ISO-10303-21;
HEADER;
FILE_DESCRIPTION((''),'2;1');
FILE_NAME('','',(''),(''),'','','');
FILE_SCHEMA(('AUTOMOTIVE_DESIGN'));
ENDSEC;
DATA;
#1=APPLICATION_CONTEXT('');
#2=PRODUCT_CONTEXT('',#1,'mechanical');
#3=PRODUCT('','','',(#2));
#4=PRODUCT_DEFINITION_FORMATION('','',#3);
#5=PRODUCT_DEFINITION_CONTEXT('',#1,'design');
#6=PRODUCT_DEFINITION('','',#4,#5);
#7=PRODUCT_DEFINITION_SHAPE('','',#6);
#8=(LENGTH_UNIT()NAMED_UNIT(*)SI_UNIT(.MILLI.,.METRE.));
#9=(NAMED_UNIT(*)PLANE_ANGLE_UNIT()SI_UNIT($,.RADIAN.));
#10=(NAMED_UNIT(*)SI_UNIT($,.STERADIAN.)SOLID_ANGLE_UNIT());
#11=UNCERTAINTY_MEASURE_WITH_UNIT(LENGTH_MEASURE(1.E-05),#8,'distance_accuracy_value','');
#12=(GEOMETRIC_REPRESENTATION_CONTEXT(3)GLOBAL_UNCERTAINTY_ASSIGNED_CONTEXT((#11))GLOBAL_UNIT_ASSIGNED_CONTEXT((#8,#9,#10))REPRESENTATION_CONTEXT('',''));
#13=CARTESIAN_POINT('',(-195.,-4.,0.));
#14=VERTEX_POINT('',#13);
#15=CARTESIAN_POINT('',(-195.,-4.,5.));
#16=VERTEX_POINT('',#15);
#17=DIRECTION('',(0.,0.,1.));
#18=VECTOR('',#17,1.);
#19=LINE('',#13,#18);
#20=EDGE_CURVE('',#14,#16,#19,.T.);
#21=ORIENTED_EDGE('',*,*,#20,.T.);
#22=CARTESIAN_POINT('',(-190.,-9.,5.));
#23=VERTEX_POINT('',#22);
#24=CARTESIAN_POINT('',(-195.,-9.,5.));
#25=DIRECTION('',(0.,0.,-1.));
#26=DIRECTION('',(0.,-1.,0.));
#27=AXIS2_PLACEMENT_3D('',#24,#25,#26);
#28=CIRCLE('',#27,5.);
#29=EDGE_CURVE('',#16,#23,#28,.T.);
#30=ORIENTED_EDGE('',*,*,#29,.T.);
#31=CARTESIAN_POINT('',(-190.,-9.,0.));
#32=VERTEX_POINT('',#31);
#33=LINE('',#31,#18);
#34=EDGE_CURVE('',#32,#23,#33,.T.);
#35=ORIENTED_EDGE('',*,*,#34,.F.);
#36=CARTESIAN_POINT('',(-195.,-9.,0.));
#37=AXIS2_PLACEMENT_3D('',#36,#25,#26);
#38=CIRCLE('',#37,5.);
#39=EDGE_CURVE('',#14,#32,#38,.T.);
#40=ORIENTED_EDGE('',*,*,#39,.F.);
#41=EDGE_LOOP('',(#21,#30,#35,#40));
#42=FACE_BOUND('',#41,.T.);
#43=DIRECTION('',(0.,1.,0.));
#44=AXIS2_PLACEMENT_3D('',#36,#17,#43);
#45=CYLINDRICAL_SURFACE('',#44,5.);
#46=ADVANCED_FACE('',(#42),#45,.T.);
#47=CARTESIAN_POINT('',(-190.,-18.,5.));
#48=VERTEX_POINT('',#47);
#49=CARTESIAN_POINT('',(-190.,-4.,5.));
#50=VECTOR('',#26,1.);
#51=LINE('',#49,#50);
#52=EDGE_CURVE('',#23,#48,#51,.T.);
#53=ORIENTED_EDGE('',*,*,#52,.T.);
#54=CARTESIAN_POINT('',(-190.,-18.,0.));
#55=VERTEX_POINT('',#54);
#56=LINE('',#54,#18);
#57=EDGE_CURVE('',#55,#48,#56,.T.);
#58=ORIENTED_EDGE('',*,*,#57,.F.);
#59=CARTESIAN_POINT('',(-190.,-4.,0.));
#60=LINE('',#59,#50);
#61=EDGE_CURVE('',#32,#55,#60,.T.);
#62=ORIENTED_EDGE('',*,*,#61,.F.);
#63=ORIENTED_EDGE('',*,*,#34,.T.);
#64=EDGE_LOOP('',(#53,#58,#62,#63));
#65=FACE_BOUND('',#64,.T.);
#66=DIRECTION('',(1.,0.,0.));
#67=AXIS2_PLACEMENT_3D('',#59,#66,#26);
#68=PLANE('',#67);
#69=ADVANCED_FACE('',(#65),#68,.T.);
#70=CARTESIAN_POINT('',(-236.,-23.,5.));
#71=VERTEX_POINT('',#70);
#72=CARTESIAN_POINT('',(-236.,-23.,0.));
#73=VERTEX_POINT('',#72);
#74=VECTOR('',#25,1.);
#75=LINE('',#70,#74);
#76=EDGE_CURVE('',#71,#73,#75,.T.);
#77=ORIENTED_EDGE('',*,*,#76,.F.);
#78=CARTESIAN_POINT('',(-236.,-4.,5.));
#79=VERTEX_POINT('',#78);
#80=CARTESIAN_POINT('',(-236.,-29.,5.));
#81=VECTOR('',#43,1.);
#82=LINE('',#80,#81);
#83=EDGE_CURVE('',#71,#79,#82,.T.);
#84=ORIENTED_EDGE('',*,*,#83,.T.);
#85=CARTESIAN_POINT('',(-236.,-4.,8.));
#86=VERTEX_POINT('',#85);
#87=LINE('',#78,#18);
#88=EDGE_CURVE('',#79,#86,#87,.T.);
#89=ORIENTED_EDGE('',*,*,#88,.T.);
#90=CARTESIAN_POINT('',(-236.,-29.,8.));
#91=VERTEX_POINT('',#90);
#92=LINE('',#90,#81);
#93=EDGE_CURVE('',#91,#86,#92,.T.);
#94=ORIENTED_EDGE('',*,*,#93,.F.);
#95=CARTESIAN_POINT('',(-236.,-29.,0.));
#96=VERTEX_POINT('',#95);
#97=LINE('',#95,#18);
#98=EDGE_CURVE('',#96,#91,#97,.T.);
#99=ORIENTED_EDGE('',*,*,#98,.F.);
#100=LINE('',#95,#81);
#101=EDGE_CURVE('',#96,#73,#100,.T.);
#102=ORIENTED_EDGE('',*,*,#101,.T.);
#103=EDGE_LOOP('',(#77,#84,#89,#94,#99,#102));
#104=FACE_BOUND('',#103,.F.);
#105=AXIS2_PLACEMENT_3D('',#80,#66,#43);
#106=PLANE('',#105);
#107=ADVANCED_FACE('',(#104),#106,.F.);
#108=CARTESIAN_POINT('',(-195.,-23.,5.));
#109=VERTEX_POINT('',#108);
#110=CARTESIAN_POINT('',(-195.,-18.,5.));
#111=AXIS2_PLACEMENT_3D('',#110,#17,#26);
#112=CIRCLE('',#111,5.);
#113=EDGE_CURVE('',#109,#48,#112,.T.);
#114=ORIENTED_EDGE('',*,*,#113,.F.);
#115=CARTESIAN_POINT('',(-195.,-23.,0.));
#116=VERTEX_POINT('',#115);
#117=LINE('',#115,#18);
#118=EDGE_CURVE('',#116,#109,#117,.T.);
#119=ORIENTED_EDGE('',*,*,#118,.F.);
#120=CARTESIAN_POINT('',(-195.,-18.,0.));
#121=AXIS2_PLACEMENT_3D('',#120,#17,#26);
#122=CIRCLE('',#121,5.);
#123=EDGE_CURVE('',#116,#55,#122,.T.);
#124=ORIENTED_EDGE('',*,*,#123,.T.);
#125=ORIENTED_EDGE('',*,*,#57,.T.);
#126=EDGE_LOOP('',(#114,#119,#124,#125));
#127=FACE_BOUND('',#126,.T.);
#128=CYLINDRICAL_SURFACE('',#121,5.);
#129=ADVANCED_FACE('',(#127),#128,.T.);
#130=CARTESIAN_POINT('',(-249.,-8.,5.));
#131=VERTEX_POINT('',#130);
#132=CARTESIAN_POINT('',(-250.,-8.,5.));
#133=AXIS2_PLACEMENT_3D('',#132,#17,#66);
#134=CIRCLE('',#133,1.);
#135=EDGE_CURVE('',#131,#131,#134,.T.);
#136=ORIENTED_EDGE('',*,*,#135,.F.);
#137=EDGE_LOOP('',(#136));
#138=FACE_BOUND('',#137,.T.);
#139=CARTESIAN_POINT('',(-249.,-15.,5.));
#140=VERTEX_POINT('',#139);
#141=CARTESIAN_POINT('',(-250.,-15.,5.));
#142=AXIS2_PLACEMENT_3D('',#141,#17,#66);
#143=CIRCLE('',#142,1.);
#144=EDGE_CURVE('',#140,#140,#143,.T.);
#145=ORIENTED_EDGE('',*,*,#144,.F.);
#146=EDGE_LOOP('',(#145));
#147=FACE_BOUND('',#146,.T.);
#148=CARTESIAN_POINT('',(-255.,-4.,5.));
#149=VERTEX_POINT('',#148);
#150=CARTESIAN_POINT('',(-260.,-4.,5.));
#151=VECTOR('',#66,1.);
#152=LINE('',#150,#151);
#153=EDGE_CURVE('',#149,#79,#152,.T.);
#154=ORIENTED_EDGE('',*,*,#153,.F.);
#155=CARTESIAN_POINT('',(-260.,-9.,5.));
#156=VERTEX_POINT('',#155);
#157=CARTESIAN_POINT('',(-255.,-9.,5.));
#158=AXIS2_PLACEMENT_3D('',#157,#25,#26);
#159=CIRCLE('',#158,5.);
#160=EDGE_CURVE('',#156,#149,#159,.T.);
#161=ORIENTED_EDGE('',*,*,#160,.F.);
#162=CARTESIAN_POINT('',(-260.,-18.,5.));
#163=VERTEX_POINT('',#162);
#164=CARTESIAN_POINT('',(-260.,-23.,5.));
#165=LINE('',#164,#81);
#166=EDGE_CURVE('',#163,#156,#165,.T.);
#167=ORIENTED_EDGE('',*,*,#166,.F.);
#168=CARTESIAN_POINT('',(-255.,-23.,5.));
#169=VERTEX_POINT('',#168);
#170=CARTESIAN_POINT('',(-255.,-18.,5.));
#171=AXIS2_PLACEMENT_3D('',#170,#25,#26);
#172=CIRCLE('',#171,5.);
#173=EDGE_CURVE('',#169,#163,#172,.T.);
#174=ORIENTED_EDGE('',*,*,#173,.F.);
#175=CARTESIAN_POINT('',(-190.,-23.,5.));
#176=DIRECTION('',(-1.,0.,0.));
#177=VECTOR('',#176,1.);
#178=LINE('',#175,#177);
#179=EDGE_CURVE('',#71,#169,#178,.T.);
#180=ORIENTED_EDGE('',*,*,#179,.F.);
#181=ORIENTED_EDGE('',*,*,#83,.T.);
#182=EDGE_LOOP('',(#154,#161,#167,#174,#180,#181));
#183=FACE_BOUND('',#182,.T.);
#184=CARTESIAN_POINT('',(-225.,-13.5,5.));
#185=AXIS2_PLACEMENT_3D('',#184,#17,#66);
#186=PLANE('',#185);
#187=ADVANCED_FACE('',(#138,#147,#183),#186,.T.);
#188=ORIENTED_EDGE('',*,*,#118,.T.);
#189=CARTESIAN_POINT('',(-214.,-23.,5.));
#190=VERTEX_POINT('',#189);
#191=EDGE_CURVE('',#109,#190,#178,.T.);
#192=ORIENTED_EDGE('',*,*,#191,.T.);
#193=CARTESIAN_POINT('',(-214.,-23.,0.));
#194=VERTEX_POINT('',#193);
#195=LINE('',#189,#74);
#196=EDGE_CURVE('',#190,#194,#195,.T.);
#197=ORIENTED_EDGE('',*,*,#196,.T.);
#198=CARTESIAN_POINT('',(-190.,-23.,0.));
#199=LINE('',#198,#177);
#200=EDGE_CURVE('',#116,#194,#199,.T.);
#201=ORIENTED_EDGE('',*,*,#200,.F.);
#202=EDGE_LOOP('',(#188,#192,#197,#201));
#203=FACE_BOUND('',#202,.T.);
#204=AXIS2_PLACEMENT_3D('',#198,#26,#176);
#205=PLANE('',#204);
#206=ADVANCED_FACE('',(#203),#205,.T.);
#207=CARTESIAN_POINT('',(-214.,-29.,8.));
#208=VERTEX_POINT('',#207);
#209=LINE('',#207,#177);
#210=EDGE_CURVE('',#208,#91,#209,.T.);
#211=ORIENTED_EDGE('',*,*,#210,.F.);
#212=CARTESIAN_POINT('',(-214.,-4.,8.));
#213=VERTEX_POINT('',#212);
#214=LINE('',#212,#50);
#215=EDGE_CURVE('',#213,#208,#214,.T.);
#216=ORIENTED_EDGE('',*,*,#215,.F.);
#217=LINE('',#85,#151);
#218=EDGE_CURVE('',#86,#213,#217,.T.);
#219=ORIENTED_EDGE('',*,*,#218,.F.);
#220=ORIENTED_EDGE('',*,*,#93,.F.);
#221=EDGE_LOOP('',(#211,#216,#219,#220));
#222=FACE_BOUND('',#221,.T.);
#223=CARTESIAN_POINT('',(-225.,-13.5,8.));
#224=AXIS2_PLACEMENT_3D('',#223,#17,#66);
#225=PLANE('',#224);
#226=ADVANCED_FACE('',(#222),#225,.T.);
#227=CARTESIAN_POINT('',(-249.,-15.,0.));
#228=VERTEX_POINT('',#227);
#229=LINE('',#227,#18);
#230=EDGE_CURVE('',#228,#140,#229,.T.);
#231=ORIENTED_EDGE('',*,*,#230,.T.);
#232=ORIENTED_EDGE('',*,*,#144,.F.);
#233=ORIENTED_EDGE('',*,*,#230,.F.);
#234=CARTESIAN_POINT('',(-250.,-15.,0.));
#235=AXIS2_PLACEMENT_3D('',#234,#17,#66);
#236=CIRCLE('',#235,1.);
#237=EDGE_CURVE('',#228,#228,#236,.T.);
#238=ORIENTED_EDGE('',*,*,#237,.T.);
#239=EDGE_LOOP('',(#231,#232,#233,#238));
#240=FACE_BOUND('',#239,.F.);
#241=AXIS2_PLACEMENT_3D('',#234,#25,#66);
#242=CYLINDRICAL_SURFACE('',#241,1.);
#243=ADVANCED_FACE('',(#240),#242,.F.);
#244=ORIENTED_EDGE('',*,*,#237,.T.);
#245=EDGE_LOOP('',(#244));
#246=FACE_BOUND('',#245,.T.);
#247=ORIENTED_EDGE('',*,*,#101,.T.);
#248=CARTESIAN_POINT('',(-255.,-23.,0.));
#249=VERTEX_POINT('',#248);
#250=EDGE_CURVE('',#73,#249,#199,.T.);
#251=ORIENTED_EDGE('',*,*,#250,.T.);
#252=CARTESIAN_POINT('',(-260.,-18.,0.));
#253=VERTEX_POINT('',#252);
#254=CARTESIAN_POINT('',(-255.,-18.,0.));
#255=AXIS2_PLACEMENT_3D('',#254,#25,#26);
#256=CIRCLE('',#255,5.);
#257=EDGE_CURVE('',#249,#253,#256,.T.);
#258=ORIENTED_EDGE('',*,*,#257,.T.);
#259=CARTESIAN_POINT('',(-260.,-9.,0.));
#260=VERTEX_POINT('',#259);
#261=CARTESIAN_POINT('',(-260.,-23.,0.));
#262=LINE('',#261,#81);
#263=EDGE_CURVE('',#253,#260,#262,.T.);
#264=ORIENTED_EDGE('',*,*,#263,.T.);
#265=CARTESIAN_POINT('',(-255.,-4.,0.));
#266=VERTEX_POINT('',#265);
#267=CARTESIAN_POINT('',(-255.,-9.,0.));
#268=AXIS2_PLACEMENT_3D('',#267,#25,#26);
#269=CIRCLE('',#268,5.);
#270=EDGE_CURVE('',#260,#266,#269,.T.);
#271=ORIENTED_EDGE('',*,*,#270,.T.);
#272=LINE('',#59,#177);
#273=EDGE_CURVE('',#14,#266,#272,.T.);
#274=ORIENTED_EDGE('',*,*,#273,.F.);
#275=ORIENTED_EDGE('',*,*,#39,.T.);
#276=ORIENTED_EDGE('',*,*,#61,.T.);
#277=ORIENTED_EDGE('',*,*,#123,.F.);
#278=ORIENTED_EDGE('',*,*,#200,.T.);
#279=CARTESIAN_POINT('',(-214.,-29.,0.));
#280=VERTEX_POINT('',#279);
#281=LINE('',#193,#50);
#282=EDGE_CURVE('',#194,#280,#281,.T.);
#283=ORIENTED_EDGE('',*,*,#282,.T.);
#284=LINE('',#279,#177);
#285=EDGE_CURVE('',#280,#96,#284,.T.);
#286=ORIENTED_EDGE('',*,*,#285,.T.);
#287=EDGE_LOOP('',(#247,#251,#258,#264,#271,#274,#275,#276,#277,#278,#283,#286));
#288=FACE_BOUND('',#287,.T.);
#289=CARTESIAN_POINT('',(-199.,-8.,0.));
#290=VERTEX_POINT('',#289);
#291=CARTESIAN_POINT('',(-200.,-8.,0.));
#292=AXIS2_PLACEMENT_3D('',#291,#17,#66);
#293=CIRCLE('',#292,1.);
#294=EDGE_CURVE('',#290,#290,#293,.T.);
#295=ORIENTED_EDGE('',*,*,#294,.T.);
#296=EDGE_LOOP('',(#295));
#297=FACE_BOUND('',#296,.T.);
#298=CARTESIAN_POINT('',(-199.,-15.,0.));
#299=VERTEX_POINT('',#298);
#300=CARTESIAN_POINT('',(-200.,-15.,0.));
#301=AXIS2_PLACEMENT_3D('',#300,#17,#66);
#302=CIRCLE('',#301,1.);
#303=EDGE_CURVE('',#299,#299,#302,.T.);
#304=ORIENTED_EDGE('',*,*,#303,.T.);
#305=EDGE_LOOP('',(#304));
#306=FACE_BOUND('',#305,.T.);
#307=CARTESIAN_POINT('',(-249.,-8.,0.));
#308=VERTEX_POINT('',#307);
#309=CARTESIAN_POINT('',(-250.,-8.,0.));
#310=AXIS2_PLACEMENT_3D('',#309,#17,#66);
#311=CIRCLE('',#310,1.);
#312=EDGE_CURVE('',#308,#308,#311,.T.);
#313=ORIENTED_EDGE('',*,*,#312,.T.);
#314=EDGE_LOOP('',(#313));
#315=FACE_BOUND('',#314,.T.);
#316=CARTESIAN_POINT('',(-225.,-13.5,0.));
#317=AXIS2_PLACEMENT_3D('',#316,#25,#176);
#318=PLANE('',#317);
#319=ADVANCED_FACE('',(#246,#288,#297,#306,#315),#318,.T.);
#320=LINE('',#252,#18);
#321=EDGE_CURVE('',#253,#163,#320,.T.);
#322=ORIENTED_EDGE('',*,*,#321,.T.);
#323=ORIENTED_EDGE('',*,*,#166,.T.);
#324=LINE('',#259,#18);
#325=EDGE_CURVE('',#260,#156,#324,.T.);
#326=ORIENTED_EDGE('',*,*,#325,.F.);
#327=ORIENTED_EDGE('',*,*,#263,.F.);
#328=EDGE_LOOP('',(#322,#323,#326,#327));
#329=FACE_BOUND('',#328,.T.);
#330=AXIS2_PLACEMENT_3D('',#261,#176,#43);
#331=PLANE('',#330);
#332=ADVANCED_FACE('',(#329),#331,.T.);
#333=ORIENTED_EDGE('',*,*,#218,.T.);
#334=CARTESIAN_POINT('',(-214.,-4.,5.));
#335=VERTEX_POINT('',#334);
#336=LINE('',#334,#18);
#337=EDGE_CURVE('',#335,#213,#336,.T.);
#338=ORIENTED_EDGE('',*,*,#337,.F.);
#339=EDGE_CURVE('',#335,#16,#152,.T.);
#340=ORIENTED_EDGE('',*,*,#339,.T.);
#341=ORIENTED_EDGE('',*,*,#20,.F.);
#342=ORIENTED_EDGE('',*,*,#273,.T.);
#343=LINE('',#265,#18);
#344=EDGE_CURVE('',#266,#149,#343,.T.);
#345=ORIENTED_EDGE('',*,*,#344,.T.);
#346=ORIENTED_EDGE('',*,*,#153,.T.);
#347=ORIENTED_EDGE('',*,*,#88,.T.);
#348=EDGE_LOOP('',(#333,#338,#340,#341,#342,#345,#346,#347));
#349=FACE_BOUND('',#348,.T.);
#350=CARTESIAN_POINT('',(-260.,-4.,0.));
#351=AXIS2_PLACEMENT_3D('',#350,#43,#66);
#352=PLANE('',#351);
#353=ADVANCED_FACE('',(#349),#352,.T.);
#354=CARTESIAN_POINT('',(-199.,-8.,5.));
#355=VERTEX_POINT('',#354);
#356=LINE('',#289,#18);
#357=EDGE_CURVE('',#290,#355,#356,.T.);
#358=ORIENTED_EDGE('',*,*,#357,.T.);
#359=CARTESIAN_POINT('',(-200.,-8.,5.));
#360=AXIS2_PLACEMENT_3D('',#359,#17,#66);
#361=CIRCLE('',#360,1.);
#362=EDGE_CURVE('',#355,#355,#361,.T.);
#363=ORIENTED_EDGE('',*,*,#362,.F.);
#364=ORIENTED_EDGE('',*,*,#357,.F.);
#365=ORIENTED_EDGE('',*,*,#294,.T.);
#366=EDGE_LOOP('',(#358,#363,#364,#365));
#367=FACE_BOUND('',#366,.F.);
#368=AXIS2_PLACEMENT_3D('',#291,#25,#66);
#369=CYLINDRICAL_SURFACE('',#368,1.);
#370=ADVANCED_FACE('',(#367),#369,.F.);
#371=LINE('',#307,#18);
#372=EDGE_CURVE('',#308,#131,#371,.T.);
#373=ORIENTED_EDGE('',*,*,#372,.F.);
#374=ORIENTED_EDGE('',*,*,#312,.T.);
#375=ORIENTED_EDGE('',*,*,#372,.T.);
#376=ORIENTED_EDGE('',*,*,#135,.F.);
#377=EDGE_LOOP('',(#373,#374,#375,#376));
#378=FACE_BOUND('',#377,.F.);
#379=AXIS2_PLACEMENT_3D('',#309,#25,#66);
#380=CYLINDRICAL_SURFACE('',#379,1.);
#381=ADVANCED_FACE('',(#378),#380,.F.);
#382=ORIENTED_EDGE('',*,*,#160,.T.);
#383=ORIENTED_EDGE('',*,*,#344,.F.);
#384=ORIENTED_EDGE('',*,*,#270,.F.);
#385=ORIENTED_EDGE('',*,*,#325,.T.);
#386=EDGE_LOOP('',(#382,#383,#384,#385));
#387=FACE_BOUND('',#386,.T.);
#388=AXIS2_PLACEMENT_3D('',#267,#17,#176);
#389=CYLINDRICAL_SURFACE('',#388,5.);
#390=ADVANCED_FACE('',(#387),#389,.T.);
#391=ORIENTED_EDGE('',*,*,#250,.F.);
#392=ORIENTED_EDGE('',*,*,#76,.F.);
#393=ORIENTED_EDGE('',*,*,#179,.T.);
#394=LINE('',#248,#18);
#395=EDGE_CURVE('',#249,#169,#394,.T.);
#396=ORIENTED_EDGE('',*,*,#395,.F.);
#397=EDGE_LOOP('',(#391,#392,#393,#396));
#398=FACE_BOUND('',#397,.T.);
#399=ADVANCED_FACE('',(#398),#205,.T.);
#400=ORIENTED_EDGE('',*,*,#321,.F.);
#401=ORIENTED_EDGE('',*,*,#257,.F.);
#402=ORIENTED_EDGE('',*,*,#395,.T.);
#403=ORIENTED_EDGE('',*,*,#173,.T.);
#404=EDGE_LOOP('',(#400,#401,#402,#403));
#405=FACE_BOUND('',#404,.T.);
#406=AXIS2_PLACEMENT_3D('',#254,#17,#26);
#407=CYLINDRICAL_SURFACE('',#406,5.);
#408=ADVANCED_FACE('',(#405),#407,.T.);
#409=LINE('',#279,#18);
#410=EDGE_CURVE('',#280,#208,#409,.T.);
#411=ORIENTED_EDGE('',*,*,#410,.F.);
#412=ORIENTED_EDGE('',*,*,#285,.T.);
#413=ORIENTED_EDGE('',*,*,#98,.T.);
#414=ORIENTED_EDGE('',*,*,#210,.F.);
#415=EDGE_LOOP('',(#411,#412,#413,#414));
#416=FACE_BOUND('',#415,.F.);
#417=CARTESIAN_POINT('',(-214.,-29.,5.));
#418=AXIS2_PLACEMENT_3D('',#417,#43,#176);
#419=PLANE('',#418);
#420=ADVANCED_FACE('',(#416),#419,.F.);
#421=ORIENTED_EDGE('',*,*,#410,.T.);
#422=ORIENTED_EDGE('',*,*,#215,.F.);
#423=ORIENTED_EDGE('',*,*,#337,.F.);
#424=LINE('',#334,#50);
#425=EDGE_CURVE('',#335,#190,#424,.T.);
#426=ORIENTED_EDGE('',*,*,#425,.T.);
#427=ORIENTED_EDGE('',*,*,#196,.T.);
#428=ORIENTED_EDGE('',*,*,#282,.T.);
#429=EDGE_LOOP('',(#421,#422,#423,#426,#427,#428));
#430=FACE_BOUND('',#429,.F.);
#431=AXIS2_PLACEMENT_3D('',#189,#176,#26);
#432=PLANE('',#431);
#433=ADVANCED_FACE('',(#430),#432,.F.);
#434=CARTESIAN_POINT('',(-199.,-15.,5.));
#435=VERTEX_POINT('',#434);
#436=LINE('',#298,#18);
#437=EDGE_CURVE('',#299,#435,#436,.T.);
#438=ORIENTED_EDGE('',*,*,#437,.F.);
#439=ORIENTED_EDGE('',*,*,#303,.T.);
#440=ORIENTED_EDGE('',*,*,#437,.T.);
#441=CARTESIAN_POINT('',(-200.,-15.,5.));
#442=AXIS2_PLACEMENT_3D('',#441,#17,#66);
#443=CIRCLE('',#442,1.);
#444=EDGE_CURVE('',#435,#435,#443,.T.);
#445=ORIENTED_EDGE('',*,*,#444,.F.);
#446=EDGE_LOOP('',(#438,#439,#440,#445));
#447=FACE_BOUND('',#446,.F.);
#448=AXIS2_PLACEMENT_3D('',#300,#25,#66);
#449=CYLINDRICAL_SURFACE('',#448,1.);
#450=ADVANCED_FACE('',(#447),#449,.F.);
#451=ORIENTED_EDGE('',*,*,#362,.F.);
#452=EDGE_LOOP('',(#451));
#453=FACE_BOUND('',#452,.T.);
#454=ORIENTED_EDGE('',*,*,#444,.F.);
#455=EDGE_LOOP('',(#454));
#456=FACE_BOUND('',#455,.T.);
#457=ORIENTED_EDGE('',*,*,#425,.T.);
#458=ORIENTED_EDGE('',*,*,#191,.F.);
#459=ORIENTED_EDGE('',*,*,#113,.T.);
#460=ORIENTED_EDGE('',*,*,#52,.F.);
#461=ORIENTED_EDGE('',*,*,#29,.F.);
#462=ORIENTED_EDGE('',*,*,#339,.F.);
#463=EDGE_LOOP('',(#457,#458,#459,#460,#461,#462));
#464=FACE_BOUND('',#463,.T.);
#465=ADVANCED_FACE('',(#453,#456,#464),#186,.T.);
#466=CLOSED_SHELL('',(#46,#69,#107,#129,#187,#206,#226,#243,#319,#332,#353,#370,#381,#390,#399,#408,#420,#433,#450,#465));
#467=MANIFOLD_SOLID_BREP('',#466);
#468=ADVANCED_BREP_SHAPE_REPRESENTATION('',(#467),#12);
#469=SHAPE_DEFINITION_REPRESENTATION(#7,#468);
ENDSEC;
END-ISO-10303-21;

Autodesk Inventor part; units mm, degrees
ref_plane "YZ Plane" through (0, 0, 0) normal (1, 0, 0) x (0, 1, 0)
ref_plane "XZ Plane" through (0, 0, 0) normal (0, 1, 0) x (-1, 0, 0)
ref_plane "XY Plane" through (0, 0, 0) normal (0, 0, 1) x (1, 0, 0)
sketch "Sketch1" plane through (0, 0, 0) normal (0, 0, 1) x (1, 0, 0)
  line L0 (-350, 95) -> (350, 95)
  line L1 (350, 95) -> (350, -95)
  line L2 (350, -95) -> (-350, -95)
  line L3 (-350, -95) -> (-350, 95)
  circle A0 centre (-250, 55) radius 10
  circle A1 centre (-250, -15) radius 10
  circle A2 centre (250, 55) radius 10
  circle A3 centre (250, -15) radius 10
  line L4 (-110, 95) -> (110, 95)
  point P0 (0, 0)
  point P1 (0, 95)
  point P2 (350, 0)
  point P3 (0, -155)
  dimension "d0" = 700
  dimension "d1" = 190
  dimension "d2" = 20
  dimension "d3" = 70
  dimension "d4" = 40
  dimension "d7" = 20
  dimension "d8" = 70
  dimension "d9" = 500
  dimension "d10" = 100
extrude "Extrusion1" add sketch "Sketch1" along normal blind 50
sketch "Sketch2" plane through (0, 0, 50) normal (0, 0, 1) x (1, 0, 0)
  line L0 (-110, 95) -> (110, 95)
  line L1 (110, 95) -> (110, -155)
  line L2 (110, -155) -> (-110, -155)
  line L3 (-110, -155) -> (-110, 95)
  line L4 (350, 95) -> (-350, 95) projected
  point P0 (0, 0)
  point P1 (0, -155)
  dimension "d15" = 220
  dimension "d16" = 250
extrude "Extrusion2" add sketch "Sketch2" along normal blind 30
sketch "Sketch3" plane through (0, 0, 50) normal (0, 0, -1) x (-1, 0, 0)
  line L0 (110, -95) -> (-110, -95) projected
  line L1 (-110, -95) -> (-110, -155) projected
  line L2 (-110, -155) -> (110, -155) projected
  line L3 (110, -155) -> (110, -95) projected
  point P0 (0, 0)
extrude "Extrusion3" add sketch "Sketch3" along normal blind 50
fillet "Fillet1" radius 50 4 edges at (-350, -95, 25) (-350, 95, 25) (350, -95, 25) (350, 95, 25)
scale "Scale1" factors (0.1, 0.1, 0.1) then translate (-225, -13.5, 0) bodies 1
equation "\"d7\" = d2"
equation "\"d10\" = -0.5 * d9 + 0.5 * d0"
properties part number "RotationLock"
